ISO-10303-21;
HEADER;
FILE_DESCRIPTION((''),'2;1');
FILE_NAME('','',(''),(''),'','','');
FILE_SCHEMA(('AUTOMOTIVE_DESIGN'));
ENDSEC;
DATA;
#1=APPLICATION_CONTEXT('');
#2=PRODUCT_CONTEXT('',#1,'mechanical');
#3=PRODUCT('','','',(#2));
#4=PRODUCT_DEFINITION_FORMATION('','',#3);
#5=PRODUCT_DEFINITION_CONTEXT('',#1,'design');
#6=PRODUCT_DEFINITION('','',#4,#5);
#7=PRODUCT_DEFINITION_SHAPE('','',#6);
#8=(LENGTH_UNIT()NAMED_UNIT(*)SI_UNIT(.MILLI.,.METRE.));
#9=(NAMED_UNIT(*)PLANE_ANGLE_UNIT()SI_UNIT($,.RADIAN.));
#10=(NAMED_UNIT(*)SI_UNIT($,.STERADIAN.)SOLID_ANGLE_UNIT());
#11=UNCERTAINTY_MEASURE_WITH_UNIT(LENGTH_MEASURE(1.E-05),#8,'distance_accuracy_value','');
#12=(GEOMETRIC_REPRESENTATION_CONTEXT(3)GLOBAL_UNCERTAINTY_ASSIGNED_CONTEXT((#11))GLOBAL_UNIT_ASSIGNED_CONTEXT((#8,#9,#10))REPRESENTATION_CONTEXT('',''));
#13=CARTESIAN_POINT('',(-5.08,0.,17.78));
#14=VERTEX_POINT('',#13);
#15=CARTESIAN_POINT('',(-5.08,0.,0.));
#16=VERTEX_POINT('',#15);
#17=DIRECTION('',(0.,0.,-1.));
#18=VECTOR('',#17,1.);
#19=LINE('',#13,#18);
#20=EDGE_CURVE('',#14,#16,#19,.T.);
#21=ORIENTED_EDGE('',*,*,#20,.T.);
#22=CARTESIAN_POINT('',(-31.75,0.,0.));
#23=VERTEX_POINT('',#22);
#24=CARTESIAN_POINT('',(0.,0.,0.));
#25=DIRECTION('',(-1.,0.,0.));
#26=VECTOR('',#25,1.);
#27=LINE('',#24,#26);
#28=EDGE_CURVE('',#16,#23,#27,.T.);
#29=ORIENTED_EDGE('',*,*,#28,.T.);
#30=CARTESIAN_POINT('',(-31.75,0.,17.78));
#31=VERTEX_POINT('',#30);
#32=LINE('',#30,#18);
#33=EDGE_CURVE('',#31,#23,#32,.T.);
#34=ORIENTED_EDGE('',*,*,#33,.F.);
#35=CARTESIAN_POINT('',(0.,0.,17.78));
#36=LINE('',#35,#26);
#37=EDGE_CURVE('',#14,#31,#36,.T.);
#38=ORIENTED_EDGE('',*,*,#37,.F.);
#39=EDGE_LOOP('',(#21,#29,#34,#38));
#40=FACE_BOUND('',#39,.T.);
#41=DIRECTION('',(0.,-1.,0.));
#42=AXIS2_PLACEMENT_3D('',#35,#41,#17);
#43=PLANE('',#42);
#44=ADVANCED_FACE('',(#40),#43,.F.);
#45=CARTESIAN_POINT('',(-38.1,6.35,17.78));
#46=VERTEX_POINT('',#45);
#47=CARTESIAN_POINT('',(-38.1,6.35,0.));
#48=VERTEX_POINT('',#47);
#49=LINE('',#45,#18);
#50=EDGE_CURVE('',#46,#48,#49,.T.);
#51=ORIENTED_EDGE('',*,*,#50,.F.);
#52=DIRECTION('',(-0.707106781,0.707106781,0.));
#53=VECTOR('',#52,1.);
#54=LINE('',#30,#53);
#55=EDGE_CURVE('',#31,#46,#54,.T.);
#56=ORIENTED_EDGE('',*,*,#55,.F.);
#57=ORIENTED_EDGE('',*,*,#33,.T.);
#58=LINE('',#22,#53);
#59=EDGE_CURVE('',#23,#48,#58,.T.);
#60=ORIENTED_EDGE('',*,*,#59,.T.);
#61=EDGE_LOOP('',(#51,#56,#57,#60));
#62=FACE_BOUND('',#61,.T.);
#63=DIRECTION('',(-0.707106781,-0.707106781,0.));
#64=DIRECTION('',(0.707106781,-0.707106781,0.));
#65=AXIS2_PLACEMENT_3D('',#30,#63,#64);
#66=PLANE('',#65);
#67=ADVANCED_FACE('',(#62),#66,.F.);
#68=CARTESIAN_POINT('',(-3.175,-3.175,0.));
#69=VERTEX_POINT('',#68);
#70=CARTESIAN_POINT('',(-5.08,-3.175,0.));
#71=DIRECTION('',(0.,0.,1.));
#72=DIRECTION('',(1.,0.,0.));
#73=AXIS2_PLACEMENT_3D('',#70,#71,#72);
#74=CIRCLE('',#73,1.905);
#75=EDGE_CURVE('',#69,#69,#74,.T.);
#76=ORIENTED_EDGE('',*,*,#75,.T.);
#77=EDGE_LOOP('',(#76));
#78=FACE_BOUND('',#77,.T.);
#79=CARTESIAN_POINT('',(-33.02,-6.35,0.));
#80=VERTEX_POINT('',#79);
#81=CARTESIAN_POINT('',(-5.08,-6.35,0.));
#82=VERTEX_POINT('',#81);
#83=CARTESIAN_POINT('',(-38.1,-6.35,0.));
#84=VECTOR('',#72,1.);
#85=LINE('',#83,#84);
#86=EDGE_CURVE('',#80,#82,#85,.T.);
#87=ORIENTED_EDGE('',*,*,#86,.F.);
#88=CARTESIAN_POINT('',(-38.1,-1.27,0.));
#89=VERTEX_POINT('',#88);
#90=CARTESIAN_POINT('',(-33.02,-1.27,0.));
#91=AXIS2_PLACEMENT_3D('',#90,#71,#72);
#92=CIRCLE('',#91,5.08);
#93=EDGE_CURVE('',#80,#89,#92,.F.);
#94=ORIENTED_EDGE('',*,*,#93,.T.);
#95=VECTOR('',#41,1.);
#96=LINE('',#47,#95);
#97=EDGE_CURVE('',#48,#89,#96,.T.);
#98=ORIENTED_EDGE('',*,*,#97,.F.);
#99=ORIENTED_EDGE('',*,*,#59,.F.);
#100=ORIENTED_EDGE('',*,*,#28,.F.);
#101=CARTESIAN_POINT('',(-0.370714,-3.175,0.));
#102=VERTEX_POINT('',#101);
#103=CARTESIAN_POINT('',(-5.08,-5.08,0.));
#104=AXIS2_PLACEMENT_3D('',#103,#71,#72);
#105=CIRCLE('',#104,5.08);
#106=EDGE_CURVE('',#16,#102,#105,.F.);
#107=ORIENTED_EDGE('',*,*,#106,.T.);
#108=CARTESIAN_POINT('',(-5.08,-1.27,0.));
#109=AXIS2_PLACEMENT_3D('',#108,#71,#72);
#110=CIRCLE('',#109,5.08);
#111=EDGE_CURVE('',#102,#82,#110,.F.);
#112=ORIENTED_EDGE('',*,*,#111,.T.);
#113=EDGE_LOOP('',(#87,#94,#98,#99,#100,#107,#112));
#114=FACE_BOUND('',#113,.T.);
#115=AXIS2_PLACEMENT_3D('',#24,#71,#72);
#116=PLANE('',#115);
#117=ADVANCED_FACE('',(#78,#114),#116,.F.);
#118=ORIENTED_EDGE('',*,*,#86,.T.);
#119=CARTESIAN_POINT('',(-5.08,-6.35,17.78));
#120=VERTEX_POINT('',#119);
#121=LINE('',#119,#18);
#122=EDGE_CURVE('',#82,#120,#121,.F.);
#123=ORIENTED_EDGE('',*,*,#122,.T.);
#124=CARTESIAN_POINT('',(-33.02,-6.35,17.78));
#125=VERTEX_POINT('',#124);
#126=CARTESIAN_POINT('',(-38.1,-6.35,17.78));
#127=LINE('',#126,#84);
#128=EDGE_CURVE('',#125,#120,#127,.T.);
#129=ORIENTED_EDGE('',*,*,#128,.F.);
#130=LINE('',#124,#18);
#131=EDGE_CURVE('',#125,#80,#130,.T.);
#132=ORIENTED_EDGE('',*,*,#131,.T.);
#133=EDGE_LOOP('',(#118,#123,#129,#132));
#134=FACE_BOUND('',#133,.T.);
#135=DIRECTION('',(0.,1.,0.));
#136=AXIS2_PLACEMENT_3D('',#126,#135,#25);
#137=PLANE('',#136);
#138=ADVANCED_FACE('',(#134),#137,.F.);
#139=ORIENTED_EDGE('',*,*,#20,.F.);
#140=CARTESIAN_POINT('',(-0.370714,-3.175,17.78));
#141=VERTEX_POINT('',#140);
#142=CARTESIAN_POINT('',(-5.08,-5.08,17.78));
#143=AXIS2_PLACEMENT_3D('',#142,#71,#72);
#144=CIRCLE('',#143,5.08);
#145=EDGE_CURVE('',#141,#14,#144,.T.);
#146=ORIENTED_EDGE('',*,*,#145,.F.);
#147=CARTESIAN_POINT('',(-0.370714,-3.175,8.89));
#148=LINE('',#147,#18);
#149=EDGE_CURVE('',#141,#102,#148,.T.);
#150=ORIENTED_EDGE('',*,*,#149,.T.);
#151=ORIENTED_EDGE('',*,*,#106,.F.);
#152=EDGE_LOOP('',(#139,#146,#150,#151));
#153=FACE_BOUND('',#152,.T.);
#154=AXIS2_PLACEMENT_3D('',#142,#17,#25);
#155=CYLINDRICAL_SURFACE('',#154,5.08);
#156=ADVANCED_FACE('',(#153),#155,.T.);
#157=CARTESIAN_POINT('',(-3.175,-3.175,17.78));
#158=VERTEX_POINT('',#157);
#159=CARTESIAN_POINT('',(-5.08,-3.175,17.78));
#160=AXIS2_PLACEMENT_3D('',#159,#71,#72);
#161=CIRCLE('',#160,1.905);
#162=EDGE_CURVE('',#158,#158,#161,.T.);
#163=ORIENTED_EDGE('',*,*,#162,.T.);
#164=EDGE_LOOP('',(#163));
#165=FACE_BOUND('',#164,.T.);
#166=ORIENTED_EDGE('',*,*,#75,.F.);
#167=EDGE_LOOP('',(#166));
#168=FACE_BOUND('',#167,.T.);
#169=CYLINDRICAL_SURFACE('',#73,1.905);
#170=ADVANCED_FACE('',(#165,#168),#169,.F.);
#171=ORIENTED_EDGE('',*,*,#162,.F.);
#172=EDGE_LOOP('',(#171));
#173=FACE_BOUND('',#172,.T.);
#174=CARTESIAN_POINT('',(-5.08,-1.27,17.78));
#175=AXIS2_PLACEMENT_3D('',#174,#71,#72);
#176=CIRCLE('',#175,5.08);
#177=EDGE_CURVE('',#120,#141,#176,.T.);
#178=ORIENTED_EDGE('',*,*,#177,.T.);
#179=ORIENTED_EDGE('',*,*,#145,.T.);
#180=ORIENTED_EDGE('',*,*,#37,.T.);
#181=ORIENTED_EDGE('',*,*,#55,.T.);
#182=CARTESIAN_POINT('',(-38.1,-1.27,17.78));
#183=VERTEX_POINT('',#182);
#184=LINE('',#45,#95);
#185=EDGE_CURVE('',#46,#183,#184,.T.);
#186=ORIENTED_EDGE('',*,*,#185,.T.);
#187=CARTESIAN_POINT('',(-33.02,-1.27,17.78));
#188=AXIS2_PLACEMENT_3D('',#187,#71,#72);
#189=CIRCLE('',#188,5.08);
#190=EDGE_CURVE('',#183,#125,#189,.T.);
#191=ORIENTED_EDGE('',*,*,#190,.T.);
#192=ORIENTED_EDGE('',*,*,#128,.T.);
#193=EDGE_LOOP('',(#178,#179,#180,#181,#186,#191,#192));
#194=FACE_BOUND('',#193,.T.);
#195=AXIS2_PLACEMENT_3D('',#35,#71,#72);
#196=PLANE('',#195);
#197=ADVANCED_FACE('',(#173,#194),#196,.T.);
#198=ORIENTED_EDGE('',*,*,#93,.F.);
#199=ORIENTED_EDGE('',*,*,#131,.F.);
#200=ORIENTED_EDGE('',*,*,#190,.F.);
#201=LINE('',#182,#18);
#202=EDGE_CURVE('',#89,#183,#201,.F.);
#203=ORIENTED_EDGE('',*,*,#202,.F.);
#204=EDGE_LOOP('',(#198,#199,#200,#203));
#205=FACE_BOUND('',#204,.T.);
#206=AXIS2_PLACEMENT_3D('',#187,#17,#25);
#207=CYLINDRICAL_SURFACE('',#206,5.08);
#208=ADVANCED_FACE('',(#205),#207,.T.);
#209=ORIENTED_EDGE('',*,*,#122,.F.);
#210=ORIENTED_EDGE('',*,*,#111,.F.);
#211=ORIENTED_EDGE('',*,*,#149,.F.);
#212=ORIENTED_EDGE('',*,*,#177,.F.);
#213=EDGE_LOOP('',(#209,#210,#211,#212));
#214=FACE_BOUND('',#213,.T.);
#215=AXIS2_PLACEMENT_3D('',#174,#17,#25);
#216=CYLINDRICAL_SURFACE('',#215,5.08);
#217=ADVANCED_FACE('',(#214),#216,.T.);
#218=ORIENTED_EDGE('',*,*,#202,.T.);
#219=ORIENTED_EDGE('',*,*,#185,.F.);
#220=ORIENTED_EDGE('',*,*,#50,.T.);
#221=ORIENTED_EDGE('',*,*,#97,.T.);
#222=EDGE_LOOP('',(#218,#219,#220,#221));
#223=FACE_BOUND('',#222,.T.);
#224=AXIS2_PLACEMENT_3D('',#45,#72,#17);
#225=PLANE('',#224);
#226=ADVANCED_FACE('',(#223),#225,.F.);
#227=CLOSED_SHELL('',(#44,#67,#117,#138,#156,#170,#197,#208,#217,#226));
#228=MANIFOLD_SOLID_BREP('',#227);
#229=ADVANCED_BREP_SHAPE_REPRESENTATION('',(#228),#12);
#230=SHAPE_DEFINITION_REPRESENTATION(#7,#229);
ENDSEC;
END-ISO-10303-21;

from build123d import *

# Parameters (mm, degrees)
BOSS_EXTRUDE1_DEPTH = 17.78
FILLET2_R           = 5.08
SKETCH3_R           = 1.905
CUT_EXTRUDE1_DEPTH  = 43.521299369


with BuildPart() as part:
    # Sketch1 → Boss-Extrude1 (new body)
    with BuildSketch(Plane(origin=(0, 0, 0), x_dir=(0, 1, 0), z_dir=(0, 0, 1))):
        Polygon((0, 0), (0, 31.75), (6.35, 38.1), (-6.35, 38.1), (-6.35, 0), align=None)
    extrude(amount=BOSS_EXTRUDE1_DEPTH)

    # Fillet2
    # the kernel refuses this fillet: 5.08 mm, written as the material it takes off along each edge
    with BuildSketch(Plane(origin=(-38.1, -6.35, -12.7), x_dir=(0, 1, 0), z_dir=(0, 0, 1)), Plane(origin=(0, -6.35, -12.7), x_dir=(-1, 0, 0), z_dir=(0, 0, 1))) as fillet2_piece_1:
        with BuildLine():
            CenterArc((FILLET2_R, -FILLET2_R), FILLET2_R, 90, 90)
            Line((0, -FILLET2_R), (0, 0))
            Line((0, 0), (FILLET2_R, 0))
        make_face()
    extrude(amount=43.18, mode=Mode.SUBTRACT)
    with BuildSketch(Plane(origin=(0, 0, -12.7), x_dir=(-1, 0, 0), z_dir=(0, 0, 1))) as fillet2_piece_2:
        with BuildLine():
            CenterArc((FILLET2_R, FILLET2_R), FILLET2_R, 180, 90)
            Line((0, FILLET2_R), (0, 0))
            Line((0, 0), (FILLET2_R, 0))
        make_face()
    extrude(amount=43.18, mode=Mode.SUBTRACT)

    # Sketch3 → Cut-Extrude1 (cut, through all)
    with BuildSketch(Plane.XY.offset(17.78)):
        with Locations((-5.08, -3.175)):
            Circle(SKETCH3_R)
    extrude(amount=-CUT_EXTRUDE1_DEPTH, mode=Mode.SUBTRACT)


solid = part.part
